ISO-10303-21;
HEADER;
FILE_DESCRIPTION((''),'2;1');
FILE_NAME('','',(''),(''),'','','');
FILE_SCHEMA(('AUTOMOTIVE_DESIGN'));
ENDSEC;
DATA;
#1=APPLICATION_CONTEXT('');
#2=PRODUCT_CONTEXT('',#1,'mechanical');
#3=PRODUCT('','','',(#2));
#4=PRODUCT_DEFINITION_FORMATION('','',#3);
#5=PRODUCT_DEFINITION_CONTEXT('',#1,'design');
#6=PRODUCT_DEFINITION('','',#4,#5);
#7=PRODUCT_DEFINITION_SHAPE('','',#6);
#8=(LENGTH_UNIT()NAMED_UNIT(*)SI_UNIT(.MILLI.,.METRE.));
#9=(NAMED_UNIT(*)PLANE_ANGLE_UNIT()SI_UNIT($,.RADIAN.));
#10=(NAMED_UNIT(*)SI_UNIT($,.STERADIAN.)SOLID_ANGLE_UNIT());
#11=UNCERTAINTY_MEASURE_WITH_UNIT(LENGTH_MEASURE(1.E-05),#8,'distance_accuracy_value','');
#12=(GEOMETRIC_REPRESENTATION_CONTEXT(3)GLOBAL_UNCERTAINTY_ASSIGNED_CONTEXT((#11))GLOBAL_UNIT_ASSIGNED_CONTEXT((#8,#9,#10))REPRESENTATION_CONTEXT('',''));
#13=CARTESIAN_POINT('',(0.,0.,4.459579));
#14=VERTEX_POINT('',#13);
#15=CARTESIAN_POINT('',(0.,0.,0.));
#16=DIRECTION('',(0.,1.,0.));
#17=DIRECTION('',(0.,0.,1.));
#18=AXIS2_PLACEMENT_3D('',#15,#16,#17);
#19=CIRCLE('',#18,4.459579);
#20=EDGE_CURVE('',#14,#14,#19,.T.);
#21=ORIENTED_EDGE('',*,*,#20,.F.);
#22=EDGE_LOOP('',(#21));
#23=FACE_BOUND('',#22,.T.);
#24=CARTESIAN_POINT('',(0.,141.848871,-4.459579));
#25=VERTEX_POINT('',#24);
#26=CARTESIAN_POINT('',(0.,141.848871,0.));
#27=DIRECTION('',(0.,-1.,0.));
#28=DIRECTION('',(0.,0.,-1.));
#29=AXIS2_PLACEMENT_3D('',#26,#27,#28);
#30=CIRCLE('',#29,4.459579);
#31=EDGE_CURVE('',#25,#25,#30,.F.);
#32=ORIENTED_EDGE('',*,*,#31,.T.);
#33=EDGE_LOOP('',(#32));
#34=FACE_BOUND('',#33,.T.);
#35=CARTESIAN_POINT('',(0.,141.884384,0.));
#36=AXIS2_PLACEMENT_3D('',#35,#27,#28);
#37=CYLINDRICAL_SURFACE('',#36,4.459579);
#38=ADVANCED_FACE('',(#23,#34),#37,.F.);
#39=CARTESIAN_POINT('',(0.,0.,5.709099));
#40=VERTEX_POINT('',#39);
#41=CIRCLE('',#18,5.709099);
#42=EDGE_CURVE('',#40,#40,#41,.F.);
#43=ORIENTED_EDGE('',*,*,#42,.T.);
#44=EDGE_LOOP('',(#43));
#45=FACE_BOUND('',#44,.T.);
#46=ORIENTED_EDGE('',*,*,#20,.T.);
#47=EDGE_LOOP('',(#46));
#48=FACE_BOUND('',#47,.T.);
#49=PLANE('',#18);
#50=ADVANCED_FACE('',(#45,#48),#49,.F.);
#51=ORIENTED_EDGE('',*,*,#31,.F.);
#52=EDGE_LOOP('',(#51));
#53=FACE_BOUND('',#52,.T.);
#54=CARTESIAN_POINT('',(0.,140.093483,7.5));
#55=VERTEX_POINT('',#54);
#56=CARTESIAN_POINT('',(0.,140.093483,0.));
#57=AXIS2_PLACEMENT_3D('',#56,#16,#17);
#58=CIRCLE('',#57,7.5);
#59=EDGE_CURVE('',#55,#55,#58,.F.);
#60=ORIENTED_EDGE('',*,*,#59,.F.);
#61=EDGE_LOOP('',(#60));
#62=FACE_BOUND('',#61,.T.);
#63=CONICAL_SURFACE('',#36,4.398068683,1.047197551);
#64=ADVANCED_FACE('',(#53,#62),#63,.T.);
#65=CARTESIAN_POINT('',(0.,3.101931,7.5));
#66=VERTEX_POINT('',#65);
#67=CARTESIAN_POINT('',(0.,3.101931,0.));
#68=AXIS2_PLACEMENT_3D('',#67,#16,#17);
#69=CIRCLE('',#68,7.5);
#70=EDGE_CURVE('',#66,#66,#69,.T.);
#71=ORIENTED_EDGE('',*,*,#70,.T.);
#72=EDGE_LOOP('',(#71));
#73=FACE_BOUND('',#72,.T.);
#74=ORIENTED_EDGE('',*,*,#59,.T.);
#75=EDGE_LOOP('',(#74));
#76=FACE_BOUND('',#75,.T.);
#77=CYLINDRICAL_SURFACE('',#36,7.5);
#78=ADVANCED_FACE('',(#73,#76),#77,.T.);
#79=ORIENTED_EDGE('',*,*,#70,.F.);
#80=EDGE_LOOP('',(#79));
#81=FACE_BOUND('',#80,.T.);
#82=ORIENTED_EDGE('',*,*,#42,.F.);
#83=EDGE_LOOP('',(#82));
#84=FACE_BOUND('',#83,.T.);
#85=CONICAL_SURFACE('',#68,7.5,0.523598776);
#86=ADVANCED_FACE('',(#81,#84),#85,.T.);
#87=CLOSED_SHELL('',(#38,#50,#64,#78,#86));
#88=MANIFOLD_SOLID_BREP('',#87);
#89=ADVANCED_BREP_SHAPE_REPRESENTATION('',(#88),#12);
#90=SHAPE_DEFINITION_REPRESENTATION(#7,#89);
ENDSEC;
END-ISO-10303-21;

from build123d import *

# Parameters (mm, degrees)
SKETCH1_R           = 7.5
BOSS_EXTRUDE1_DEPTH = 141.884384
SKETCH2_R           = 4.459579484
CUT_EXTRUDE1_DEPTH  = 143.280281217
CHAMFER1_SIZE       = 1.790901
CHAMFER1_SIZE_2     = 3.101931


with BuildPart() as part:
    # Sketch1 → Boss-Extrude1 (new body)
    with BuildSketch(Plane(origin=(0, 0, 0), x_dir=(1, 0, 0), z_dir=(0, 1, 0))):
        with Locations(Location((0, 0, 0), (0, 0, 270))):
            Circle(SKETCH1_R)
    extrude(amount=BOSS_EXTRUDE1_DEPTH)

    # Sketch2 → Cut-Extrude1 (cut, through all)
    with BuildSketch(Plane(origin=(0, 0, 0), x_dir=(1, 0, 0), z_dir=(0, 1, 0))):
        with Locations(Location((0, 0, 0), (0, 0, 270))):
            Circle(SKETCH2_R)
    extrude(amount=CUT_EXTRUDE1_DEPTH, mode=Mode.SUBTRACT)

    # Chamfer1
    # the kernel refuses this chamfer: 3.101931, 1.790901 mm, written as the material it takes off along each edge
    with BuildSketch(Plane(origin=(0, 141.884384, 0), x_dir=(0, 0, 1), z_dir=(-1, 0, 0))) as chamfer1_piece_1:
        Polygon((7.5, -CHAMFER1_SIZE), (7.5 - CHAMFER1_SIZE_2, 0), (7.5, 0), align=None)
    revolve(axis=Axis((0, 141.884384, 0), (0, 1, 0)), mode=Mode.SUBTRACT)
    with BuildSketch(Plane(origin=(0, 0, 0), x_dir=(0, 0, 1), z_dir=(-1, 0, 0))) as chamfer1_piece_2:
        Polygon((7.5, CHAMFER1_SIZE_2), (7.5 - CHAMFER1_SIZE, 0), (7.5, 0), align=None)
    revolve(axis=Axis((0, 0, 0), (0, 1, 0)), mode=Mode.SUBTRACT)


solid = part.part
